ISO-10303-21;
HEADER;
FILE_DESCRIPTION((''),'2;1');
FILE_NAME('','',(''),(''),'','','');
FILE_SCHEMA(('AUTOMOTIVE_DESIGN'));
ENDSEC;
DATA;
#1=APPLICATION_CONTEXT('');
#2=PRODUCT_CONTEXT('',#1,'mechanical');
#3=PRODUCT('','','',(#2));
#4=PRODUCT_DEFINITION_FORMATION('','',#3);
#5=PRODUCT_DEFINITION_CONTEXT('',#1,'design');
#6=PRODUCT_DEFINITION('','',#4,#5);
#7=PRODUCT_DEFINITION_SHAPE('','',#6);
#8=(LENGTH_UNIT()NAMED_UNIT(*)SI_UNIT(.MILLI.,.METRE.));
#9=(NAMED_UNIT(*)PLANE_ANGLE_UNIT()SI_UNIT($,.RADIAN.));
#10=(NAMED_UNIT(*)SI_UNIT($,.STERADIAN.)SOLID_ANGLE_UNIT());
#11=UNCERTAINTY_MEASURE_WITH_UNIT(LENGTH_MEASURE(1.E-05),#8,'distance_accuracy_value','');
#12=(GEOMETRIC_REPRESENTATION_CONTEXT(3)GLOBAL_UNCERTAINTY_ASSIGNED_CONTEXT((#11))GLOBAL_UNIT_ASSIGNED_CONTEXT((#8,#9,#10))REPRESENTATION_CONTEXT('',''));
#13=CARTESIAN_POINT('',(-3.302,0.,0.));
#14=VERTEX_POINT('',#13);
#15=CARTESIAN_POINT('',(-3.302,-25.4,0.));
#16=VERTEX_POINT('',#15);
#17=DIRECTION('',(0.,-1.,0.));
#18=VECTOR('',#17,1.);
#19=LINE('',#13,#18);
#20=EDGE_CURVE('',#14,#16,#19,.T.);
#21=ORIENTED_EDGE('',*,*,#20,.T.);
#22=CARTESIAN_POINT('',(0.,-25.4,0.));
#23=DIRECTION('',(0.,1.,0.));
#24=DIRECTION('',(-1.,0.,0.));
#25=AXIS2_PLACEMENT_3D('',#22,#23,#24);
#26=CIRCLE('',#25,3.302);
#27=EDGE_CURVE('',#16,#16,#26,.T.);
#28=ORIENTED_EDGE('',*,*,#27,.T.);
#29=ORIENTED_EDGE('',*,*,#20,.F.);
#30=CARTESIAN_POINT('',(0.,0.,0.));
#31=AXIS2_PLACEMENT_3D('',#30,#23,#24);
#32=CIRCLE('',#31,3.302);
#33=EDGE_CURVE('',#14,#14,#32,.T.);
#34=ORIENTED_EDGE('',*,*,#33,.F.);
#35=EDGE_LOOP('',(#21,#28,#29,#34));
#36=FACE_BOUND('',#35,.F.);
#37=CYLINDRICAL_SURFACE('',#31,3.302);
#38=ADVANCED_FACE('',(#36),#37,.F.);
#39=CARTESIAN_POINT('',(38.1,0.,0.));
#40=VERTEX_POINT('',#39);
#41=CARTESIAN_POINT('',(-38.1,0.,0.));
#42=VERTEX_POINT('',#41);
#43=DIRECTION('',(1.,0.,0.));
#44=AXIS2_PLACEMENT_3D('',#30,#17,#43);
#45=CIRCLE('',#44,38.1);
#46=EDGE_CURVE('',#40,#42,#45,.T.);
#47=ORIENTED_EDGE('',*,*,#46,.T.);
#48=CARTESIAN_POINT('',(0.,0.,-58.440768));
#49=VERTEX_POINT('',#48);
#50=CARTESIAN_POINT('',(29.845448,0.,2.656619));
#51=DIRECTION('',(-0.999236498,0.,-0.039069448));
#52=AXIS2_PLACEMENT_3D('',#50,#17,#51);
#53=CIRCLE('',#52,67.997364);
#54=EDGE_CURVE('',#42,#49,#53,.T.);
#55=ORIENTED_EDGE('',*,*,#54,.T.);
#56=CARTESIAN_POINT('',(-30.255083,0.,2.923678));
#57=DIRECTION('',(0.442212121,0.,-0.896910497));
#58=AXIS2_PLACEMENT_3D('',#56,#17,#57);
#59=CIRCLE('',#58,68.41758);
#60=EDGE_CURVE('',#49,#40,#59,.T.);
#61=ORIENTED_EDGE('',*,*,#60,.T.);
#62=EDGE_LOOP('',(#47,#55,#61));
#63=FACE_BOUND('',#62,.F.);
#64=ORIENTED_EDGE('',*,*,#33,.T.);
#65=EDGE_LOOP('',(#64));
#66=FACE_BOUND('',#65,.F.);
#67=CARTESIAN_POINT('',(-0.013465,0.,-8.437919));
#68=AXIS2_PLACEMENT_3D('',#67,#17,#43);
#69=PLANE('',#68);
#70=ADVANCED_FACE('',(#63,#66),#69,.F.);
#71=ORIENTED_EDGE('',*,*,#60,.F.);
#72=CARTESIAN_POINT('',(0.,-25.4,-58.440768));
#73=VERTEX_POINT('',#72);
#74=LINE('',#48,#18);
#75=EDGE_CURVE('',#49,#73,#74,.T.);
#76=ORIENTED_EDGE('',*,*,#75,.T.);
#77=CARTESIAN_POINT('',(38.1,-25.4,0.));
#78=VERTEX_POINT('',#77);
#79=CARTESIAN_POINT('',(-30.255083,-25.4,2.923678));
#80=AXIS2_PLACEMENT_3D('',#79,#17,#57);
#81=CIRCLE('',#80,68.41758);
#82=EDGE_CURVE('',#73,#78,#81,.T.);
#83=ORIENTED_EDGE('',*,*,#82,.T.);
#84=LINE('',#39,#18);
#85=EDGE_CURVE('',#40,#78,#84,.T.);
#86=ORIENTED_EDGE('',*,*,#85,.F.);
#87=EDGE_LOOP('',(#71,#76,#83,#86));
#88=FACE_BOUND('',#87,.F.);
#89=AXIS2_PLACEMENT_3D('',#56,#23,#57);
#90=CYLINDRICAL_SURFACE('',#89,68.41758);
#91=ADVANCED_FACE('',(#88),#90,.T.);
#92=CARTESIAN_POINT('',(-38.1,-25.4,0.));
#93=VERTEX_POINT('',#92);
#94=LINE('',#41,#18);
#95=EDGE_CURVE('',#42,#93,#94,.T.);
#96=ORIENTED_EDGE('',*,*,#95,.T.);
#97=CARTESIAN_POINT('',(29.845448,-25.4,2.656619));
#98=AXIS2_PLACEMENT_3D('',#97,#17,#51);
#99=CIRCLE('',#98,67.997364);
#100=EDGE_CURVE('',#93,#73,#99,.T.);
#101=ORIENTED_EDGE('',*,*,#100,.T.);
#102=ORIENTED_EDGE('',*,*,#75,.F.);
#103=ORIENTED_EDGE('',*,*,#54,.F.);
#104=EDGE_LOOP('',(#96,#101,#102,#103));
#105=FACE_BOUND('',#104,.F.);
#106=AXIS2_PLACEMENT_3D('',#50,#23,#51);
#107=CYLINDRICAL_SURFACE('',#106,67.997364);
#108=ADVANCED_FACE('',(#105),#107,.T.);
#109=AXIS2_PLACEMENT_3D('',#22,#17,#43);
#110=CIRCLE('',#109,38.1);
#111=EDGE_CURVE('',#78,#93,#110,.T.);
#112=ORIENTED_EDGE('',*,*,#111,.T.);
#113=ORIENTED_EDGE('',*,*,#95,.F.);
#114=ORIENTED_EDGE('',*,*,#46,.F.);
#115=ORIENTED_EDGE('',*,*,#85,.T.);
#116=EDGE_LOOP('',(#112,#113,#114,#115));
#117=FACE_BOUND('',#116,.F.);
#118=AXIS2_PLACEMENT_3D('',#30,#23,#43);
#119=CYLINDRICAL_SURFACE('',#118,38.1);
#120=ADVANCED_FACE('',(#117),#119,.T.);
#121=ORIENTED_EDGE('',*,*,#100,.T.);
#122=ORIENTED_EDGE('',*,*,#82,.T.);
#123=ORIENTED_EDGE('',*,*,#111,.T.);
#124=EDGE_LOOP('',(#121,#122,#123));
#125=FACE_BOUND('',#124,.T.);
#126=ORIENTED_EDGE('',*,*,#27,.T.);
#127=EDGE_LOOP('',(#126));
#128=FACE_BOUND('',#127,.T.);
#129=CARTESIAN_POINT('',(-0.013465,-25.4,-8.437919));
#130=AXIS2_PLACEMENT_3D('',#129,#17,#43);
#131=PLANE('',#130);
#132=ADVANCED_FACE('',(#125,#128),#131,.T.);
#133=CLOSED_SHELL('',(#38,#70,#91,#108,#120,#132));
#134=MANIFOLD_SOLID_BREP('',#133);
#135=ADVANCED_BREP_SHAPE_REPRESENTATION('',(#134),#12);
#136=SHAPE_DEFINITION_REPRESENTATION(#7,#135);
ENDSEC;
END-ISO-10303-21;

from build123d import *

# Parameters (mm, degrees)
F2_DEPTH = 25.4
F3_R     = 3.302
F4_DEPTH = 25.4


# Not quite as in the source:
# - the program builds the solid bodies; features that only make, move or delete a surface that nothing else refers to are left out


with BuildPart() as f2:
    # F0 (on Front) → F2 (new body)
    with BuildSketch(Plane.XZ):
        with BuildLine():
            ThreePointArc((0, -58.4407677476), (27.0582840041, -34.4413217964), (38.1, 0))
            ThreePointArc((38.1, 0), (0, 38.1), (-38.1, 0))
            ThreePointArc((-38.1, 0), (-27.1159044848, -34.4788870166), (0, -58.4407677476))
        make_face()
    extrude(amount=F2_DEPTH)

    # F3 (on face) → F4 (cut)
    with BuildSketch(Plane(origin=(0, 0, 0), x_dir=(-1, 0, 0), z_dir=(0, 1, 0))):
        Circle(F3_R)
    extrude(amount=-F4_DEPTH, mode=Mode.SUBTRACT)


solid = f2.part
